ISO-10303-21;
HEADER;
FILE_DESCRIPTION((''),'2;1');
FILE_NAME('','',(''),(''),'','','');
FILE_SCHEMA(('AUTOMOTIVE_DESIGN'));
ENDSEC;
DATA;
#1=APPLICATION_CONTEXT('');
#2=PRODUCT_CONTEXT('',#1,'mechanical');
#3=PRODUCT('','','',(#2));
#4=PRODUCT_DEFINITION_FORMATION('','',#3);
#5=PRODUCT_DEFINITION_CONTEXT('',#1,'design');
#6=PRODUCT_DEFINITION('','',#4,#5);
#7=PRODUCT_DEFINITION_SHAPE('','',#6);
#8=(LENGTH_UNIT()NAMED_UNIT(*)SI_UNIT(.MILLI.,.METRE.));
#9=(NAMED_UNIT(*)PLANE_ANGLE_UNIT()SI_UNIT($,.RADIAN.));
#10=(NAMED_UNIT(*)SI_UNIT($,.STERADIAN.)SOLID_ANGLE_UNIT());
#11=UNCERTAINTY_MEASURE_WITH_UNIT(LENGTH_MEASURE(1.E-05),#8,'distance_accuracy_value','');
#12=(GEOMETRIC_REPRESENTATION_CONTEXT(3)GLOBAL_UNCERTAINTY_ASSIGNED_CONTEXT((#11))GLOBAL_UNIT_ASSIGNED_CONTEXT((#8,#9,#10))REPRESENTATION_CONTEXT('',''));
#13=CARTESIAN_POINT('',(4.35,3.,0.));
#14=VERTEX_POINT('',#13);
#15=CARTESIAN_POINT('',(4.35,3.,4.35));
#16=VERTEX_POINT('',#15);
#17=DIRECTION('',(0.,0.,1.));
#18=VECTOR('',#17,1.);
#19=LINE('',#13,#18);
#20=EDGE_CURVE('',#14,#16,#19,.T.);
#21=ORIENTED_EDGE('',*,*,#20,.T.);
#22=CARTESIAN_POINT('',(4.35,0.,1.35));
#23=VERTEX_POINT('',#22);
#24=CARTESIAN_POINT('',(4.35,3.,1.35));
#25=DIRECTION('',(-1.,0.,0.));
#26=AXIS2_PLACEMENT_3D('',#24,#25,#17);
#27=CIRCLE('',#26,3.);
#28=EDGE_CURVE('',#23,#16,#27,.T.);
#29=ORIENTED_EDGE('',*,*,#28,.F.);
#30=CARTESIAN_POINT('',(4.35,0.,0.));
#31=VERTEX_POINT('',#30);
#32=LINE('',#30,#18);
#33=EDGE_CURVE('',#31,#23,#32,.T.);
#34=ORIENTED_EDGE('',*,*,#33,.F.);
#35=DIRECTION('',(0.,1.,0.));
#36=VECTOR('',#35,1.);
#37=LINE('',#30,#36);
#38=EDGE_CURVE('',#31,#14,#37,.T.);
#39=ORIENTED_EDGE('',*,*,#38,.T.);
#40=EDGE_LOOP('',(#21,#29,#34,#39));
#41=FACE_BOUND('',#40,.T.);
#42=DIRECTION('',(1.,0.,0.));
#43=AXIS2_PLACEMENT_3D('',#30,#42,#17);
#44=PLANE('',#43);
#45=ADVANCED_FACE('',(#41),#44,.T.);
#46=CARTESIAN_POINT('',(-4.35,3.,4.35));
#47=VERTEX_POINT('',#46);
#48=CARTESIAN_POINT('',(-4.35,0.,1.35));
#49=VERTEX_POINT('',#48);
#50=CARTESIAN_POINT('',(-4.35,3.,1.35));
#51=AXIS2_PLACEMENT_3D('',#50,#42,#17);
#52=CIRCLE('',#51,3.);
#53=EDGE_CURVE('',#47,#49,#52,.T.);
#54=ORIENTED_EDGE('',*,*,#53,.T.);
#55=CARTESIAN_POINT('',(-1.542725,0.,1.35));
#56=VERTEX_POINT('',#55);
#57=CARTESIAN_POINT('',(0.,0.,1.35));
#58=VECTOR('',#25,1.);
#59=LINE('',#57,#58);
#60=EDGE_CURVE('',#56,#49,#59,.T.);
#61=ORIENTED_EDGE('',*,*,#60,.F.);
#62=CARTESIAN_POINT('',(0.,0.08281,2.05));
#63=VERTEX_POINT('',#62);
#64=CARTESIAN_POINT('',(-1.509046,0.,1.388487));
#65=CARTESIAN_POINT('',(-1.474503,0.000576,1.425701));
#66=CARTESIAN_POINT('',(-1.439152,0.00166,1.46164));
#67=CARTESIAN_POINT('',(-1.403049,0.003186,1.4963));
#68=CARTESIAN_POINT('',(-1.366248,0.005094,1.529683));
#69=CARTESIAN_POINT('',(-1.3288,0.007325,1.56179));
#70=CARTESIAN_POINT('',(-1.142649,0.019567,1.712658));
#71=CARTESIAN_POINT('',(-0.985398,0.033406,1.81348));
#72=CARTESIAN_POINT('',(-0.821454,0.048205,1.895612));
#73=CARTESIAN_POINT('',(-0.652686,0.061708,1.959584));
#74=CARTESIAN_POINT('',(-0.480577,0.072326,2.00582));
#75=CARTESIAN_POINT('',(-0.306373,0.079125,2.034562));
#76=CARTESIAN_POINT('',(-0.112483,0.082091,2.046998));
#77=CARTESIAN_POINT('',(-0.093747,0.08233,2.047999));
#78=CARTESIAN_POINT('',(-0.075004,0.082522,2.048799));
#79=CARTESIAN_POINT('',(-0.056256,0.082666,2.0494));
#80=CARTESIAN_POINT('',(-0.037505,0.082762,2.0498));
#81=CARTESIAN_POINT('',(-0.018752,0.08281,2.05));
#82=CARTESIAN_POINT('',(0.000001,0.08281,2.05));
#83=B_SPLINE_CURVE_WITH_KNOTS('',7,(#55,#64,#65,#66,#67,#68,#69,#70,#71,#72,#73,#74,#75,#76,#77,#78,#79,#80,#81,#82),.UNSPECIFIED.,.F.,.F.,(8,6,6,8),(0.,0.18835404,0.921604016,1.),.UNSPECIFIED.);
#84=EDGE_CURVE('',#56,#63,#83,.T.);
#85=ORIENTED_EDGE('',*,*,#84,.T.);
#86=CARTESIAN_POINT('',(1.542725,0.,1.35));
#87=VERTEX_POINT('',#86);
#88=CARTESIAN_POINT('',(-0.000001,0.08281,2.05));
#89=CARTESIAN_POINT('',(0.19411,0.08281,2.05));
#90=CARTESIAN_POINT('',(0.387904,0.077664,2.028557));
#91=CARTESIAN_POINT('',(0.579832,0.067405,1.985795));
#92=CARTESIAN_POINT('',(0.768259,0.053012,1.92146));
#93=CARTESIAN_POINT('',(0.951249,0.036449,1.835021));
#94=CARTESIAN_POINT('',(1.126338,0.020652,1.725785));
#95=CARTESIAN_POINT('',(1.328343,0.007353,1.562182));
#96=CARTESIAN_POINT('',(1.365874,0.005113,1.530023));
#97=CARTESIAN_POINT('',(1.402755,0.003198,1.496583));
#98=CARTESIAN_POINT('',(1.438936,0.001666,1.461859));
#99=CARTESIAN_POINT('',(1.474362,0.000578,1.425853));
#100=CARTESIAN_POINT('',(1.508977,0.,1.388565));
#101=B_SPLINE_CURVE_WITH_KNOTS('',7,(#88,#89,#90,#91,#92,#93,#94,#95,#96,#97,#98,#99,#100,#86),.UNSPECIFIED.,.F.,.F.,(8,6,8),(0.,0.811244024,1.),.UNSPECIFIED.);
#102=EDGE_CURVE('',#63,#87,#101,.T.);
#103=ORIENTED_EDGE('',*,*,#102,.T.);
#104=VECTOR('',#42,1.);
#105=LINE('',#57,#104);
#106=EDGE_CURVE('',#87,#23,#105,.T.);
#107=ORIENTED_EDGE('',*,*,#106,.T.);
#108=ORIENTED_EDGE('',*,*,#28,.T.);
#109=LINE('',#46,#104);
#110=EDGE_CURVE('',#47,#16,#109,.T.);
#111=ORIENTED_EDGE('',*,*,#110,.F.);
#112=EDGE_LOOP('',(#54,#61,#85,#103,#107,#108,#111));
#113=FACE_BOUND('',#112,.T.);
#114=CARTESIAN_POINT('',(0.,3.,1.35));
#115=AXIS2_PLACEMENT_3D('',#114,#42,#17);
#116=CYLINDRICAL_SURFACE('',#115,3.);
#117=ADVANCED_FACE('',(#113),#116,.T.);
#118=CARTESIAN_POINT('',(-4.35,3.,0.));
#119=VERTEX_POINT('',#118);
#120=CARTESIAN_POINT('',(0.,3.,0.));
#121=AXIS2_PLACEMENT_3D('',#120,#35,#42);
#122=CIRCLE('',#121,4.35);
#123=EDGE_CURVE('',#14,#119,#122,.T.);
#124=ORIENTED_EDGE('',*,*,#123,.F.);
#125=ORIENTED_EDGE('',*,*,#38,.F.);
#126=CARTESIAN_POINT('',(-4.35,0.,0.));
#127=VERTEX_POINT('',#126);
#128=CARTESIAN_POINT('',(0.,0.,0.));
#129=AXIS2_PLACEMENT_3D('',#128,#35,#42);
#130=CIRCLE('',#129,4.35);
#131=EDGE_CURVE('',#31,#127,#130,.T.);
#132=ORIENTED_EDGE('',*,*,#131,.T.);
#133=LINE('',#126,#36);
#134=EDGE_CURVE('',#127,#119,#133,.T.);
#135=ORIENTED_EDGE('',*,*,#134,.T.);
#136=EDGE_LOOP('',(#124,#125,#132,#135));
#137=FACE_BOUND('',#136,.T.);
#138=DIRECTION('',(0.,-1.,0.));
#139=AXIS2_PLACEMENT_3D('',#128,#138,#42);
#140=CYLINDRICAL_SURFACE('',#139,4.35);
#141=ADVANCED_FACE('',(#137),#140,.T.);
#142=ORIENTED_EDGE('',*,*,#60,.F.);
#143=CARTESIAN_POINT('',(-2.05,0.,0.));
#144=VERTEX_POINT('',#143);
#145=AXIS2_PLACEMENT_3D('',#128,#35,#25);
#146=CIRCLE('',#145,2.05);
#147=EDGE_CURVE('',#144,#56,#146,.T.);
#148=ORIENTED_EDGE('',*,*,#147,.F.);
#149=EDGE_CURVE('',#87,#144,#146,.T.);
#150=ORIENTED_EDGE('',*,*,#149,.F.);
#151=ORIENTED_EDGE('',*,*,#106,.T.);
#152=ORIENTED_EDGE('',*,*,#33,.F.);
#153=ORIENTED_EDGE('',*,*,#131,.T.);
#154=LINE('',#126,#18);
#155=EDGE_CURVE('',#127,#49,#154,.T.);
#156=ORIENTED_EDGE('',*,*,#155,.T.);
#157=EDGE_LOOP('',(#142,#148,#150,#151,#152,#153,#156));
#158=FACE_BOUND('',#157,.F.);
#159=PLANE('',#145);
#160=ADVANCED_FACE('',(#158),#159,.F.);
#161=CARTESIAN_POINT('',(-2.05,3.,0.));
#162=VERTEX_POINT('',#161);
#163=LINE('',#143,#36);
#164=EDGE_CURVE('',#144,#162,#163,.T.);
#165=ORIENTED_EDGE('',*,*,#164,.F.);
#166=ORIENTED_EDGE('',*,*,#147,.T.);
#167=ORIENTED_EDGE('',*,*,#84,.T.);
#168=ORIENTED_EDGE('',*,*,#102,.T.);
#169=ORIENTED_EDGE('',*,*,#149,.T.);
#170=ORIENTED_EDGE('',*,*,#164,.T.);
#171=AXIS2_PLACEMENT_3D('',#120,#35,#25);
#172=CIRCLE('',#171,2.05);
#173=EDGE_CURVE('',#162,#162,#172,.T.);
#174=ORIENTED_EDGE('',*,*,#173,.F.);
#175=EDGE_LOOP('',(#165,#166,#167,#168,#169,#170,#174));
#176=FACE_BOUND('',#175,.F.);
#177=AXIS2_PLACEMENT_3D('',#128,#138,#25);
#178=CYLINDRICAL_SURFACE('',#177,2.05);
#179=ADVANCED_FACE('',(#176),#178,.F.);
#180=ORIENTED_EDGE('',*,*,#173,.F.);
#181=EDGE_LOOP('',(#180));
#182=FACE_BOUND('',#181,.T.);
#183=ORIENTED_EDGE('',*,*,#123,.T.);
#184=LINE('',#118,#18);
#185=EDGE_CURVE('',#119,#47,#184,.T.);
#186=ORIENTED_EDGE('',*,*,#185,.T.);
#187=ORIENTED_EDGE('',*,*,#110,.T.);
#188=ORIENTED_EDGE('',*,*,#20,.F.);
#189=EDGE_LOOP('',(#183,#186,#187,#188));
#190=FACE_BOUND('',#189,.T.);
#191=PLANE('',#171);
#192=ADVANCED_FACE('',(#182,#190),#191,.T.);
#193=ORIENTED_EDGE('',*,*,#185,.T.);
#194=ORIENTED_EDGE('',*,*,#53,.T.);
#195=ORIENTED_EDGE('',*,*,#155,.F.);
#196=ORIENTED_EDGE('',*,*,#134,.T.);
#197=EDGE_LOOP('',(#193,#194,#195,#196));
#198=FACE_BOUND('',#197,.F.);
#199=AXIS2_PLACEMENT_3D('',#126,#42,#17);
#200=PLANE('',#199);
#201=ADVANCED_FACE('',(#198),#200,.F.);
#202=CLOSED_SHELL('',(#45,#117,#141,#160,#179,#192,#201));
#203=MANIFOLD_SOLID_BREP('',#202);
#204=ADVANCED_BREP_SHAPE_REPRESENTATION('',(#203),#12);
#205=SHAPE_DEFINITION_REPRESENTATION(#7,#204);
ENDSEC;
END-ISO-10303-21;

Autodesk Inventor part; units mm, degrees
ref_plane "YZ Plane" through (0, 0, 0) normal (1, 0, 0) x (0, 1, 0)
ref_plane "XZ Plane" through (0, 0, 0) normal (0, 1, 0) x (-1, 0, 0)
ref_plane "XY Plane" through (0, 0, 0) normal (0, 0, 1) x (1, 0, 0)
sketch "Sketch1" plane through (0, 0, 0) normal (0, 1, 0) x (-1, 0, 0)
  circle A0 centre (0, 0) radius 2.05
  arc A1 (0, 4.35) -> (-4.35, 0) centre (0, 0) ccw construction
  line L0 (0, 4.35) -> (4.35, 4.35)
  line L1 (4.35, 0) -> (4.35, 4.35)
  line L2 (0, 4.35) -> (-4.35, 4.35)
  line L3 (-4.35, 0) -> (-4.35, 4.35)
  arc A2 (4.35, 0) -> (0, 4.35) centre (0, 0) ccw construction
  arc A3 (-4.35, 0) -> (4.35, 0) centre (0, 0) ccw
  dimension "d0" = 4.1
  dimension "d1" = 2.3
extrude "Extrusion1" add sketch "Sketch1" along normal blind 3
fillet "Fillet1" radius 3 1 edges at (-2.175, 0, 4.35)
properties part number "top_housing_screw_spacers"
